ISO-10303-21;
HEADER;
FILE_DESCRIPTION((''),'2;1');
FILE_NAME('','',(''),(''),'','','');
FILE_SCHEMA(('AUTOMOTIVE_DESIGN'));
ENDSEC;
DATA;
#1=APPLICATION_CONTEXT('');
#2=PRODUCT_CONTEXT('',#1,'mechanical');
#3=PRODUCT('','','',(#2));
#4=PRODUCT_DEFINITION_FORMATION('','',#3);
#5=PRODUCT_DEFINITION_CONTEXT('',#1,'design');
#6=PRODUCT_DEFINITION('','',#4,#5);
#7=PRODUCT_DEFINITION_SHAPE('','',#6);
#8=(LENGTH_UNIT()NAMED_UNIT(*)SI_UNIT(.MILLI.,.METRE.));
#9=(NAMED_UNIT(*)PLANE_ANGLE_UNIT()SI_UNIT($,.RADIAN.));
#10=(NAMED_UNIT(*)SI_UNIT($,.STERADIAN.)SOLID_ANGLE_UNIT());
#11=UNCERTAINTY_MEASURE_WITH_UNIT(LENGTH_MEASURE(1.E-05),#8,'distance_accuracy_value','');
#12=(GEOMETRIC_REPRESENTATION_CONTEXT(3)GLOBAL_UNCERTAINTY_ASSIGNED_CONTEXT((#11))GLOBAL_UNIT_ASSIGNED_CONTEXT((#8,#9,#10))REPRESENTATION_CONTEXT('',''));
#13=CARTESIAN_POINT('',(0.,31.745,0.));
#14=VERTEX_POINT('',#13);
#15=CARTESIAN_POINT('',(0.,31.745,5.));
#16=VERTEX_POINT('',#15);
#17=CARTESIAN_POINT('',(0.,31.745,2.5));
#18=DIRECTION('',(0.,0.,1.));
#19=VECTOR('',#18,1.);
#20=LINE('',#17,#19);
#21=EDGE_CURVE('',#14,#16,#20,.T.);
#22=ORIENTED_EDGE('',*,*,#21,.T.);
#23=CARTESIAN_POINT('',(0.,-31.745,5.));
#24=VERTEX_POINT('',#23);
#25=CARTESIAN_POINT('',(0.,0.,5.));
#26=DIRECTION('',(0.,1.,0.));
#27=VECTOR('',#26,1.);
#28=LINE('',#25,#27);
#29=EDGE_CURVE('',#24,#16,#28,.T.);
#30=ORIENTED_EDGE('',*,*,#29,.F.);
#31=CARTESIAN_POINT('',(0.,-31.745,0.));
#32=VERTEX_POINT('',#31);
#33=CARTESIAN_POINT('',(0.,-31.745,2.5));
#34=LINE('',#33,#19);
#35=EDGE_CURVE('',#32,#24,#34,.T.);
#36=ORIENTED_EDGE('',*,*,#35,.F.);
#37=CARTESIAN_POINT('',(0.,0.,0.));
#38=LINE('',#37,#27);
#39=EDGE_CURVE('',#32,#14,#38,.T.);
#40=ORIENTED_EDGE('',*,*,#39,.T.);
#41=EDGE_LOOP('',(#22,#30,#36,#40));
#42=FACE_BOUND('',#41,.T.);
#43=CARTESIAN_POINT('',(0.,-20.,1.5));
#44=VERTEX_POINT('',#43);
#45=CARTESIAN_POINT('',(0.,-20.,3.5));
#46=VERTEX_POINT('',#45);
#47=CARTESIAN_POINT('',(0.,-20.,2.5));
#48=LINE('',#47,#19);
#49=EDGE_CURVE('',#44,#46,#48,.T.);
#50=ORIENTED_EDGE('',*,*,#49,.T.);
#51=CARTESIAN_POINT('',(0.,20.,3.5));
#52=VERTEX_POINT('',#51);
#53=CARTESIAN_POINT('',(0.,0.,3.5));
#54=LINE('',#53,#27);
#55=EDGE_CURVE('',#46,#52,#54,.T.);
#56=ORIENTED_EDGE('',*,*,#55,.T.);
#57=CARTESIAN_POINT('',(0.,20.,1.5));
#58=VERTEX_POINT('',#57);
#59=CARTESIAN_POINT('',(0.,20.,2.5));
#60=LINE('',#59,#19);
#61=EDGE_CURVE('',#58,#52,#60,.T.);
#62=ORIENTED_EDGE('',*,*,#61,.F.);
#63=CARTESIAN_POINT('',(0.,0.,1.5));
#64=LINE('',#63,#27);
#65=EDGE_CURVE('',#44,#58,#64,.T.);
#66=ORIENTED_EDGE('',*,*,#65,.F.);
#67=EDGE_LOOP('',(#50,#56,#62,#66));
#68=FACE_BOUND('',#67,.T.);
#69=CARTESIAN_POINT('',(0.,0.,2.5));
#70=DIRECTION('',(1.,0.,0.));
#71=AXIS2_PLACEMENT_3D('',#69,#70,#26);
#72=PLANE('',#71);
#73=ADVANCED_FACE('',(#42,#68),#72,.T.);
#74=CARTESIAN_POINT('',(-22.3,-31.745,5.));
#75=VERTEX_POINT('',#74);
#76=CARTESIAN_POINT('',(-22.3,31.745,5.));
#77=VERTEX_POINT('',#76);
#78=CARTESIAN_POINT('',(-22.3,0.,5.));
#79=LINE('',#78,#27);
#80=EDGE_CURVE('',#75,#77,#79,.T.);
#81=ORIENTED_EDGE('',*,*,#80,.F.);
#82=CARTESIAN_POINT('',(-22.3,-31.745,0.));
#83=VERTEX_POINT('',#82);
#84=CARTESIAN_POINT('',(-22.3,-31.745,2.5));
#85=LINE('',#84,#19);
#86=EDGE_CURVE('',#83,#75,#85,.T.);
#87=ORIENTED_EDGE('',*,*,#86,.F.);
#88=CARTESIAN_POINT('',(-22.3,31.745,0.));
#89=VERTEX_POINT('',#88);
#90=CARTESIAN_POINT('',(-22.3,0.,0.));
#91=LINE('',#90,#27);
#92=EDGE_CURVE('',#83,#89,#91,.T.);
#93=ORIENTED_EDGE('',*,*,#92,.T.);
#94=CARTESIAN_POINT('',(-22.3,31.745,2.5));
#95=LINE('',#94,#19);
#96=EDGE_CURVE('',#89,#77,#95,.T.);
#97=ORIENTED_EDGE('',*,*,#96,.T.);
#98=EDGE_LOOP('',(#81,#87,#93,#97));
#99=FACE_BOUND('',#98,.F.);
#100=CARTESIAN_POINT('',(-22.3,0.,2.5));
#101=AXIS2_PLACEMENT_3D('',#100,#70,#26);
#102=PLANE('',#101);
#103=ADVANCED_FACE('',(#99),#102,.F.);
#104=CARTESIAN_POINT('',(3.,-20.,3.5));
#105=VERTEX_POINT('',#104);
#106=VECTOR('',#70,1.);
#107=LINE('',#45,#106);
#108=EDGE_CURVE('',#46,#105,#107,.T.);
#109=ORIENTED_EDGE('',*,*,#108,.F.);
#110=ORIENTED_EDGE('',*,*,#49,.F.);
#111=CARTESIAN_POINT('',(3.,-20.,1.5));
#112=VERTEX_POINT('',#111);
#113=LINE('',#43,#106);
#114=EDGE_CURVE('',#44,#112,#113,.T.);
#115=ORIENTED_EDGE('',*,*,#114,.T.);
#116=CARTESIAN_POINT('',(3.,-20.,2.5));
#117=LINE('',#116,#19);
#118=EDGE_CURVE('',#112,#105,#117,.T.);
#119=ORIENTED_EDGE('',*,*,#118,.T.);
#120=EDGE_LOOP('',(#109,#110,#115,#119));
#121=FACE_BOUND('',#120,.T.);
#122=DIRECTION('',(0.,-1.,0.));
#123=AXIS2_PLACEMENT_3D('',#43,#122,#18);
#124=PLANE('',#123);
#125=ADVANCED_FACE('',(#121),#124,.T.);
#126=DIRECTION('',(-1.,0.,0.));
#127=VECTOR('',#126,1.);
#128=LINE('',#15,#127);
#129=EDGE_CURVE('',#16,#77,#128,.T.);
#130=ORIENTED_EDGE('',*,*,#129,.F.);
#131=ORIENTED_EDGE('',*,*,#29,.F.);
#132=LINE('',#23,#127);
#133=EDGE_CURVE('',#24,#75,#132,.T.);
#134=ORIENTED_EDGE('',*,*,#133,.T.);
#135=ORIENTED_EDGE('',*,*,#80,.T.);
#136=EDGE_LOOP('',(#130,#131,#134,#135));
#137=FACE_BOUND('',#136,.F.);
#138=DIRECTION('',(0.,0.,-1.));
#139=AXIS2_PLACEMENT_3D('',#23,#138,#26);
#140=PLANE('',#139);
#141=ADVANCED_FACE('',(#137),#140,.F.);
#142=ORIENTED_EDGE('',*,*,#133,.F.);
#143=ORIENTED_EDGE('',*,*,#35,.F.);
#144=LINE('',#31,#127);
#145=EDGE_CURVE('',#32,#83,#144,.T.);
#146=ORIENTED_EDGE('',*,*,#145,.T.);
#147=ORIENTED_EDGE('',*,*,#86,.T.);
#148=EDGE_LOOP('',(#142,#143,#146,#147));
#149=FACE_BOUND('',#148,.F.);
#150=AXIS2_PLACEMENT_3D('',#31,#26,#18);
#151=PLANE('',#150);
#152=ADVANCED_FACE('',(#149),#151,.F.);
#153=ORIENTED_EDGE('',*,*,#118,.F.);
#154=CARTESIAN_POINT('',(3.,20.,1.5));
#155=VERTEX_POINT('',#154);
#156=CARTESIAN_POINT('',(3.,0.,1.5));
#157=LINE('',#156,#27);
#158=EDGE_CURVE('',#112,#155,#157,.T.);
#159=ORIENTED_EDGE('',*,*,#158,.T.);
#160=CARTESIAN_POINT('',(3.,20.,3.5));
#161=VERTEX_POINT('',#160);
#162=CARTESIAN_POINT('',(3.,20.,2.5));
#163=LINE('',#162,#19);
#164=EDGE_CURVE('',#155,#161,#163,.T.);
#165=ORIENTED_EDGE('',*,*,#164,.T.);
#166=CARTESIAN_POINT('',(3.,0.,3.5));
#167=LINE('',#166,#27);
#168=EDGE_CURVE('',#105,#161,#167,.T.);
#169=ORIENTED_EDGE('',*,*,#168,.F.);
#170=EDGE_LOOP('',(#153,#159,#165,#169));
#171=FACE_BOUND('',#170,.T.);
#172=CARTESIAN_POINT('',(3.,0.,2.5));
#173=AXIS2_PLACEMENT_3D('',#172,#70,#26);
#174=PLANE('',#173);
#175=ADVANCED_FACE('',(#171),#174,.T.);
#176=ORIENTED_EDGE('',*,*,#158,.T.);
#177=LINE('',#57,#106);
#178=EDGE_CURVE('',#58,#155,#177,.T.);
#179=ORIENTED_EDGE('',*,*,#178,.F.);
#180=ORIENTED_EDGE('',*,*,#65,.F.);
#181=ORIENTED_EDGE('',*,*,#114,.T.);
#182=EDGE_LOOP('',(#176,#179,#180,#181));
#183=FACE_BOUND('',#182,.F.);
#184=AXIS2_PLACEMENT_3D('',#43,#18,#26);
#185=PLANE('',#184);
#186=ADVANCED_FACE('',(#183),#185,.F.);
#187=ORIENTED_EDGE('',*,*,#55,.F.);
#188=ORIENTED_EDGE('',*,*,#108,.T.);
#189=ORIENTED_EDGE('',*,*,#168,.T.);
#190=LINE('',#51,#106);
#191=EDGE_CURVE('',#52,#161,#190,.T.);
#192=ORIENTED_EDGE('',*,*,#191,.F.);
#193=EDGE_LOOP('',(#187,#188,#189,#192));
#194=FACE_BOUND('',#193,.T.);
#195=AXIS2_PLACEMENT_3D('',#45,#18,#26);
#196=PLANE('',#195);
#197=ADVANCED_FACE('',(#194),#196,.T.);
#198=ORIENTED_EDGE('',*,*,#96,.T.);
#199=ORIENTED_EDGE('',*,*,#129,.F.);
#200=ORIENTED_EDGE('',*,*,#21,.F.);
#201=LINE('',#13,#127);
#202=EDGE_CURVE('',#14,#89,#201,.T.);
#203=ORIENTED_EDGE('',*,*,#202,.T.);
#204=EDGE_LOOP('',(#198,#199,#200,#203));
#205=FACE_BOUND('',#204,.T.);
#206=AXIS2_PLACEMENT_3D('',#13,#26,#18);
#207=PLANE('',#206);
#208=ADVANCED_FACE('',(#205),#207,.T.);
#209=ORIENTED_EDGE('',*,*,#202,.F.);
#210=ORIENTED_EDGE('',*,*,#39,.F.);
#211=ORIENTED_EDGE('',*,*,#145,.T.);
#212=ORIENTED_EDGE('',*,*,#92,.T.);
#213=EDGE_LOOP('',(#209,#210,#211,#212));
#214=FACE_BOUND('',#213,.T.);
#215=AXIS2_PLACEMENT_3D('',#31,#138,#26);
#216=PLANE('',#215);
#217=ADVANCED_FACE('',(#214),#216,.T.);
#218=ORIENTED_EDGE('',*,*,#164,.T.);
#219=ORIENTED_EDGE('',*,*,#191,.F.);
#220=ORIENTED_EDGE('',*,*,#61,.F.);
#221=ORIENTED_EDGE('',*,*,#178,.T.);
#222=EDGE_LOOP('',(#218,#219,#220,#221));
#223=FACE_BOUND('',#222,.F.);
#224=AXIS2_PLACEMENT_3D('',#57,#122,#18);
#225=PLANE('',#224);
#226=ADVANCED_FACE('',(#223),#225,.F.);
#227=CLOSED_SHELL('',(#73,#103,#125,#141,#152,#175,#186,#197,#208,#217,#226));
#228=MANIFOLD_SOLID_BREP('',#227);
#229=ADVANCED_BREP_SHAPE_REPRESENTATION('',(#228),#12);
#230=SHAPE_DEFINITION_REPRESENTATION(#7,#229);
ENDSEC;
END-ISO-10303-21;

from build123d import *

# Parameters (mm, degrees)
F0_W     = 63.49
F0_H     = 5
F1_DEPTH = 22.3
F2_W     = 40
F2_H     = 2
F3_DEPTH = 3


# Not quite as in the source:
# - a feature of the source that left no trace in its solid (it failed there, or was rolled back) is left out


with BuildPart() as f1:
    # F0 (on Right) → F1 (new body)
    with BuildSketch(Plane.YZ):
        with Locations((0, 2.5)):
            Rectangle(F0_W, F0_H)
    extrude(amount=-F1_DEPTH)

    # F2 (on face) → F3 (join)
    with BuildSketch(Plane.YZ):
        with Locations((0, 2.5)):
            Rectangle(F2_W, F2_H)
    extrude(amount=F3_DEPTH)


solid = f1.part
